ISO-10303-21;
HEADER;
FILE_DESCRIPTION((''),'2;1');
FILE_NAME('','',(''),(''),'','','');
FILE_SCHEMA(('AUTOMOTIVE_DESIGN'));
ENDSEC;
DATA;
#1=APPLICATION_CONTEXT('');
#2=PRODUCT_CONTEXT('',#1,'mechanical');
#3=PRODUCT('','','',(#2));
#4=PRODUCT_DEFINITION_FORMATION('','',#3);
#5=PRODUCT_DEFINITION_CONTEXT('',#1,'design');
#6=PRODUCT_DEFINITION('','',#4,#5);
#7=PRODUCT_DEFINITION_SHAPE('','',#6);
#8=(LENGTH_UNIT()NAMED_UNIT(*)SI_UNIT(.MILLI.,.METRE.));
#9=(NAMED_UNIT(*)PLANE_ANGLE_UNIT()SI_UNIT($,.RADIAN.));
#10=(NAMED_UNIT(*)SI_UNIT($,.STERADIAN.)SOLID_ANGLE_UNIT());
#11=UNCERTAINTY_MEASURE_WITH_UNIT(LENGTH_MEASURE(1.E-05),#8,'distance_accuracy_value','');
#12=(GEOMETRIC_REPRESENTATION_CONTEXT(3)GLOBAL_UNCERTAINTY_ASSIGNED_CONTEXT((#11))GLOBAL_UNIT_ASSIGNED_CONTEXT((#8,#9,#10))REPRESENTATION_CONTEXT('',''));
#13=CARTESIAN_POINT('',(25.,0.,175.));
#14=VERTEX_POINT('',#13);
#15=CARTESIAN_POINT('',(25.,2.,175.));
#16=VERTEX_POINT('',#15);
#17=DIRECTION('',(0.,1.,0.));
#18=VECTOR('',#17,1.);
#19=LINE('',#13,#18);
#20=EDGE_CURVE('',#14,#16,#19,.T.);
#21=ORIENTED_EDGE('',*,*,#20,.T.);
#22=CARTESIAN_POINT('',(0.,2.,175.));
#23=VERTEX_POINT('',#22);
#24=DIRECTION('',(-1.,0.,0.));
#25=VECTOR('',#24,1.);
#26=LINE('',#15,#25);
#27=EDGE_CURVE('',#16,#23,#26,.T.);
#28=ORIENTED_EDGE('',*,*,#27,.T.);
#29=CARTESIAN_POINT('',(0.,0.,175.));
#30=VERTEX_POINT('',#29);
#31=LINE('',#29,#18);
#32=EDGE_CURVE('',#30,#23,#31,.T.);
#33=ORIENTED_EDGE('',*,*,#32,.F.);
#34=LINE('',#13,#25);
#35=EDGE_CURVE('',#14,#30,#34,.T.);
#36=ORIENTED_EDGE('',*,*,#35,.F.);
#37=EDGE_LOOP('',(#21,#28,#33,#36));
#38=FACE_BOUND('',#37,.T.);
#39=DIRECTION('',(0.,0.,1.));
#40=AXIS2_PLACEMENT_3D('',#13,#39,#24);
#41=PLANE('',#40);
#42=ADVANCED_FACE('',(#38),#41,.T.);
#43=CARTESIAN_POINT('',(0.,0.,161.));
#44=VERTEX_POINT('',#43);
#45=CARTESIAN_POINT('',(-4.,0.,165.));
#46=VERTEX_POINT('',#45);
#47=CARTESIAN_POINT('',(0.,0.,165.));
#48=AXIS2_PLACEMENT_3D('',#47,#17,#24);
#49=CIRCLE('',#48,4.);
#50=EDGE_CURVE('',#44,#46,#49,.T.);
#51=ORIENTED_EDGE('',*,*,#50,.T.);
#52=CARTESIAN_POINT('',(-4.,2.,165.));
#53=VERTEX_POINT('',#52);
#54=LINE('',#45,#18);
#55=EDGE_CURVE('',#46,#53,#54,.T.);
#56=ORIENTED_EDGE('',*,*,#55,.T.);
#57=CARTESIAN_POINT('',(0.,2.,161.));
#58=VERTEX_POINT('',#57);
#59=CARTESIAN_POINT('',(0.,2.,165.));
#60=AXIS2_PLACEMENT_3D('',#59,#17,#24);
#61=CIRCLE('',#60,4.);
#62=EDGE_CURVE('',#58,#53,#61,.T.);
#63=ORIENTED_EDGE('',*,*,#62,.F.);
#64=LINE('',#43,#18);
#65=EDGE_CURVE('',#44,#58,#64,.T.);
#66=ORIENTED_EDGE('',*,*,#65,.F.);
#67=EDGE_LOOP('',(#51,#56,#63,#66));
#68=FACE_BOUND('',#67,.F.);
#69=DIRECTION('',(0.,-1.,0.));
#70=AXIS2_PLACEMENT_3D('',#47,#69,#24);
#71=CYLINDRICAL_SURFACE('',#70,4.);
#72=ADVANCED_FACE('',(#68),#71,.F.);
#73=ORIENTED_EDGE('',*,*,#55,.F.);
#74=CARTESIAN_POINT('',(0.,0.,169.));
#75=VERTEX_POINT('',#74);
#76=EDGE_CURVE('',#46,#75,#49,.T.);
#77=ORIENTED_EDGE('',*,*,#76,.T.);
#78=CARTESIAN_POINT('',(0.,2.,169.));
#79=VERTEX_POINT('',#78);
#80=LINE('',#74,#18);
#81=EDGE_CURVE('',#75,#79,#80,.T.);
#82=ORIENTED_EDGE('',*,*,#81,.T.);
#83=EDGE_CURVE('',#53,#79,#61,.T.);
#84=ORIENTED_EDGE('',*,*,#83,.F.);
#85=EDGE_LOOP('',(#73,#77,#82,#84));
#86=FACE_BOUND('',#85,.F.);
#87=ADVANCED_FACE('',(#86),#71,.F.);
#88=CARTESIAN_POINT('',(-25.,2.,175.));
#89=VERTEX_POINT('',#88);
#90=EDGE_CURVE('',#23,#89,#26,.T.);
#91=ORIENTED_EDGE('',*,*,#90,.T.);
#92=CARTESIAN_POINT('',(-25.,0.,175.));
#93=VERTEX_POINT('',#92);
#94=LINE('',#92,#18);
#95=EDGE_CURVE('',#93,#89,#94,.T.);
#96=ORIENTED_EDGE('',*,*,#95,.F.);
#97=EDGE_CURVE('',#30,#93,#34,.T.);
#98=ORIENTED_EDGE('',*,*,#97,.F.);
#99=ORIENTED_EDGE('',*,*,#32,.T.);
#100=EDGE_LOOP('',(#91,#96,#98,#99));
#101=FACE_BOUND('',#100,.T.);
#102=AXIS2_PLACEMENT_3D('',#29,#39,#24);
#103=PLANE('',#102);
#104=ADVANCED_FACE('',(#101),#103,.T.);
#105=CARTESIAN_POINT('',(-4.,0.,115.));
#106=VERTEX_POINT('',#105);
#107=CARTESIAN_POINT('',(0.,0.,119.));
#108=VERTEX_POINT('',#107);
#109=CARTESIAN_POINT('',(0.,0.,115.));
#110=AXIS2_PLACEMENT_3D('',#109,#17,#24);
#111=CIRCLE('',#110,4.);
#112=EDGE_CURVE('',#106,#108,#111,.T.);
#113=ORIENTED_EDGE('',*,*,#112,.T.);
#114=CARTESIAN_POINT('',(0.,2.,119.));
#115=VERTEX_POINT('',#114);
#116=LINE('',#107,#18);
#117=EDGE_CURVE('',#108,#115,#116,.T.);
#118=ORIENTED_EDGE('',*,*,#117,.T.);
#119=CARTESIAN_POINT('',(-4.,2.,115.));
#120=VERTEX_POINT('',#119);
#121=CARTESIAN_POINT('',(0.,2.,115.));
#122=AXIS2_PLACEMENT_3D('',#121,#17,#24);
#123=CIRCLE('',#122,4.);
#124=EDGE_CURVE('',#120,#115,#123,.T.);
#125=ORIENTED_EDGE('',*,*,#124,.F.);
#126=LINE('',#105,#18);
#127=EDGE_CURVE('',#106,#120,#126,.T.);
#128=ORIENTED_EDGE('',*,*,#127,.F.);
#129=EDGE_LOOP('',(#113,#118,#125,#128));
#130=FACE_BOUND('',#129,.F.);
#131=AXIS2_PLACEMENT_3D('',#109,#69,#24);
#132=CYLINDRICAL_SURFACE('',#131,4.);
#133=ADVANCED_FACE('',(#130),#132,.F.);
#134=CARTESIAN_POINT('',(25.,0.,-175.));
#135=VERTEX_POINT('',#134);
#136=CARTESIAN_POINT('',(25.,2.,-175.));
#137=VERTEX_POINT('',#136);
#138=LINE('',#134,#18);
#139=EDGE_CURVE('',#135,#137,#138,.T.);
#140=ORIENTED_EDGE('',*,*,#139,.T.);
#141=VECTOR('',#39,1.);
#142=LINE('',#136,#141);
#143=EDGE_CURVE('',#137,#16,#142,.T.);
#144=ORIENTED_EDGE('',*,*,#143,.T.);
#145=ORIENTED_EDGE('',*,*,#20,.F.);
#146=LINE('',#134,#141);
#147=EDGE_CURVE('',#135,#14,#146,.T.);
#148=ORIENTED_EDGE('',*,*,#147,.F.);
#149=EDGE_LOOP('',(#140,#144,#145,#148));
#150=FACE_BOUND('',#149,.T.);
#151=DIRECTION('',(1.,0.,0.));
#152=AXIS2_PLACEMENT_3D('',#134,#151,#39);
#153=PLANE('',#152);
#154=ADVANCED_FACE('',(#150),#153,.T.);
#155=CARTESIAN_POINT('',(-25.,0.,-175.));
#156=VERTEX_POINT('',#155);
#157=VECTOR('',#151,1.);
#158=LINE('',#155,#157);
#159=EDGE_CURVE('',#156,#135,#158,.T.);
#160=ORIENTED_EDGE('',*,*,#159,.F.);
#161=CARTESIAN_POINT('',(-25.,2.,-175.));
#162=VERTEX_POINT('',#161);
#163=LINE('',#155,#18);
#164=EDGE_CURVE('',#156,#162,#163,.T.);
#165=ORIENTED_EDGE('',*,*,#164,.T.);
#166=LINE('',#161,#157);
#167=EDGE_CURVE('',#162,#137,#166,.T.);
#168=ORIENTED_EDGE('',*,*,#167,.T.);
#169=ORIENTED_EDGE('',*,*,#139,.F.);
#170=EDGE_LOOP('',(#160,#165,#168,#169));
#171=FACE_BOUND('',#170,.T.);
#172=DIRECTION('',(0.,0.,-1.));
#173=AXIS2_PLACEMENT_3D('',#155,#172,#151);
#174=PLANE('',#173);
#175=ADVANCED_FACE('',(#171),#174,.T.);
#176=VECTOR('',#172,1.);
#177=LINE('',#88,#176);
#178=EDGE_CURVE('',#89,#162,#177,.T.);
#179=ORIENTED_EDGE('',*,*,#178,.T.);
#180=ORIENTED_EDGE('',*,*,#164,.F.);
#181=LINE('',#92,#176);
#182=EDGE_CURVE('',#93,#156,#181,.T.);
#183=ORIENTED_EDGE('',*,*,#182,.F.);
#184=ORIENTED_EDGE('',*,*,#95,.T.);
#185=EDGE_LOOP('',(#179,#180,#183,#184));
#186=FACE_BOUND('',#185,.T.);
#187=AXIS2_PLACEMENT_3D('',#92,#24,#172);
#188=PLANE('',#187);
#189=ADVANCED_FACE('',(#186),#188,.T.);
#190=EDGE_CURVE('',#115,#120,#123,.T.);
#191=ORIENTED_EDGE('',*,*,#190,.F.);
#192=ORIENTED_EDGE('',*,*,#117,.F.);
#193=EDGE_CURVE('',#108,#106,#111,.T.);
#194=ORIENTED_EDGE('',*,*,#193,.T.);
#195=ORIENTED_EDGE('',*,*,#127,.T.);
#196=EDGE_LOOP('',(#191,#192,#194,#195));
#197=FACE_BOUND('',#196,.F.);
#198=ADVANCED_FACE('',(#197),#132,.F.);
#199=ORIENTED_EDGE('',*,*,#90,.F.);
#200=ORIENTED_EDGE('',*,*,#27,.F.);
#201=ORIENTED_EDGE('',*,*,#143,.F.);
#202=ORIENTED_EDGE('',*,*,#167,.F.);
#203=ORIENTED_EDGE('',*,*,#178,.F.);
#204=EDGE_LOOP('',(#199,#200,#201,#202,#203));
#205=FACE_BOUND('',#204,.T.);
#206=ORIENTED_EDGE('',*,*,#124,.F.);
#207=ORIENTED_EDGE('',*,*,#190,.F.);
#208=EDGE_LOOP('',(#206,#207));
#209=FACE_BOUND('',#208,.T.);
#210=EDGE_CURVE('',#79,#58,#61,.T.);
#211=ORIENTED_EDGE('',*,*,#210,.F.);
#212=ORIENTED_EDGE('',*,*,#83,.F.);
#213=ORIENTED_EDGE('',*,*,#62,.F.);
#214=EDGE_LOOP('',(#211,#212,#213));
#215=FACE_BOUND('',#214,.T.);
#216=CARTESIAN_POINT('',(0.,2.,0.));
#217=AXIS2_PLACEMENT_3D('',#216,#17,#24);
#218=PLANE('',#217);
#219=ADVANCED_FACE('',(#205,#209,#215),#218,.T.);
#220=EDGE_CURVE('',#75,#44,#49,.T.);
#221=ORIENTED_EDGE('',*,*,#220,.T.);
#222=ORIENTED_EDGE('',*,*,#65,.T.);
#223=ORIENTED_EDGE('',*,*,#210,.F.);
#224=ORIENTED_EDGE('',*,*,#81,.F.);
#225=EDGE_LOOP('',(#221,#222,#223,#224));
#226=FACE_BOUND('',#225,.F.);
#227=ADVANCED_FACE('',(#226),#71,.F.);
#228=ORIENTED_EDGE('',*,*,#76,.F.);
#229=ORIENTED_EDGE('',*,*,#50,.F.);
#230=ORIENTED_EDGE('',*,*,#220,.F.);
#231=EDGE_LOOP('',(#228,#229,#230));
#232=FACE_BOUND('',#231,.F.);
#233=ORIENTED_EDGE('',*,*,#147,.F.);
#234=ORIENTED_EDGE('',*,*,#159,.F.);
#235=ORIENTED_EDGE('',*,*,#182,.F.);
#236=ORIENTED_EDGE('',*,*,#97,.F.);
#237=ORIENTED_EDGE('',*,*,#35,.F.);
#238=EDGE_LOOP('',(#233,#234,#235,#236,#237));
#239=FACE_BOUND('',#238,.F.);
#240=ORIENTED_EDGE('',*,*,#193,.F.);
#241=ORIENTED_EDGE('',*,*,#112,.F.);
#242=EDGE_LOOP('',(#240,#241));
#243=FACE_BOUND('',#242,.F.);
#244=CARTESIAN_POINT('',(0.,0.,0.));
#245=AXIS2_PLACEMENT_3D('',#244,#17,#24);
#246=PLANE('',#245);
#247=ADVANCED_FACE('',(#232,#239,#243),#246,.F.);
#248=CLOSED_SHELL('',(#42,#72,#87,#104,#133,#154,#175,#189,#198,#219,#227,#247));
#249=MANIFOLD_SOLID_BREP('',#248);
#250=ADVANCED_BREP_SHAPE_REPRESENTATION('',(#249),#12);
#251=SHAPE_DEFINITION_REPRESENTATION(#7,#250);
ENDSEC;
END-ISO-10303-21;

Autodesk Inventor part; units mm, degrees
ref_plane "YZ Plane" through (0, 0, 0) normal (1, 0, 0) x (0, 1, 0)
ref_plane "XZ Plane" through (0, 0, 0) normal (0, 1, 0) x (-1, 0, 0)
ref_plane "XY Plane" through (0, 0, 0) normal (0, 0, 1) x (1, 0, 0)
sketch "Sketch1" plane through (0, 0, 0) normal (0, 1, 0) x (-1, 0, 0)
  line L0 (-25, 175) -> (25, 175)
  line L1 (25, 175) -> (25, -175)
  line L2 (25, -175) -> (-25, -175)
  line L3 (-25, -175) -> (-25, 175)
  line L4 (-25, 175) -> (25, -175) construction
  line L5 (25, 175) -> (-25, -175) construction
  line L6 (0, 175) -> (0, 165)
  circle A0 centre (0, 165) radius 4
  line L7 (0, 165) -> (0, 115)
  circle A1 centre (0, 115) radius 4
  point P0 (0, 0)
  dimension "d0" = 50
  dimension "d1" = 350
  dimension "d2" = 10
  dimension "d3" = 8
  dimension "d4" = 50
  dimension "d5" = 8
extrude "Extrusion1" add sketch "Sketch1" along normal blind 2
properties part number "Ldw"
